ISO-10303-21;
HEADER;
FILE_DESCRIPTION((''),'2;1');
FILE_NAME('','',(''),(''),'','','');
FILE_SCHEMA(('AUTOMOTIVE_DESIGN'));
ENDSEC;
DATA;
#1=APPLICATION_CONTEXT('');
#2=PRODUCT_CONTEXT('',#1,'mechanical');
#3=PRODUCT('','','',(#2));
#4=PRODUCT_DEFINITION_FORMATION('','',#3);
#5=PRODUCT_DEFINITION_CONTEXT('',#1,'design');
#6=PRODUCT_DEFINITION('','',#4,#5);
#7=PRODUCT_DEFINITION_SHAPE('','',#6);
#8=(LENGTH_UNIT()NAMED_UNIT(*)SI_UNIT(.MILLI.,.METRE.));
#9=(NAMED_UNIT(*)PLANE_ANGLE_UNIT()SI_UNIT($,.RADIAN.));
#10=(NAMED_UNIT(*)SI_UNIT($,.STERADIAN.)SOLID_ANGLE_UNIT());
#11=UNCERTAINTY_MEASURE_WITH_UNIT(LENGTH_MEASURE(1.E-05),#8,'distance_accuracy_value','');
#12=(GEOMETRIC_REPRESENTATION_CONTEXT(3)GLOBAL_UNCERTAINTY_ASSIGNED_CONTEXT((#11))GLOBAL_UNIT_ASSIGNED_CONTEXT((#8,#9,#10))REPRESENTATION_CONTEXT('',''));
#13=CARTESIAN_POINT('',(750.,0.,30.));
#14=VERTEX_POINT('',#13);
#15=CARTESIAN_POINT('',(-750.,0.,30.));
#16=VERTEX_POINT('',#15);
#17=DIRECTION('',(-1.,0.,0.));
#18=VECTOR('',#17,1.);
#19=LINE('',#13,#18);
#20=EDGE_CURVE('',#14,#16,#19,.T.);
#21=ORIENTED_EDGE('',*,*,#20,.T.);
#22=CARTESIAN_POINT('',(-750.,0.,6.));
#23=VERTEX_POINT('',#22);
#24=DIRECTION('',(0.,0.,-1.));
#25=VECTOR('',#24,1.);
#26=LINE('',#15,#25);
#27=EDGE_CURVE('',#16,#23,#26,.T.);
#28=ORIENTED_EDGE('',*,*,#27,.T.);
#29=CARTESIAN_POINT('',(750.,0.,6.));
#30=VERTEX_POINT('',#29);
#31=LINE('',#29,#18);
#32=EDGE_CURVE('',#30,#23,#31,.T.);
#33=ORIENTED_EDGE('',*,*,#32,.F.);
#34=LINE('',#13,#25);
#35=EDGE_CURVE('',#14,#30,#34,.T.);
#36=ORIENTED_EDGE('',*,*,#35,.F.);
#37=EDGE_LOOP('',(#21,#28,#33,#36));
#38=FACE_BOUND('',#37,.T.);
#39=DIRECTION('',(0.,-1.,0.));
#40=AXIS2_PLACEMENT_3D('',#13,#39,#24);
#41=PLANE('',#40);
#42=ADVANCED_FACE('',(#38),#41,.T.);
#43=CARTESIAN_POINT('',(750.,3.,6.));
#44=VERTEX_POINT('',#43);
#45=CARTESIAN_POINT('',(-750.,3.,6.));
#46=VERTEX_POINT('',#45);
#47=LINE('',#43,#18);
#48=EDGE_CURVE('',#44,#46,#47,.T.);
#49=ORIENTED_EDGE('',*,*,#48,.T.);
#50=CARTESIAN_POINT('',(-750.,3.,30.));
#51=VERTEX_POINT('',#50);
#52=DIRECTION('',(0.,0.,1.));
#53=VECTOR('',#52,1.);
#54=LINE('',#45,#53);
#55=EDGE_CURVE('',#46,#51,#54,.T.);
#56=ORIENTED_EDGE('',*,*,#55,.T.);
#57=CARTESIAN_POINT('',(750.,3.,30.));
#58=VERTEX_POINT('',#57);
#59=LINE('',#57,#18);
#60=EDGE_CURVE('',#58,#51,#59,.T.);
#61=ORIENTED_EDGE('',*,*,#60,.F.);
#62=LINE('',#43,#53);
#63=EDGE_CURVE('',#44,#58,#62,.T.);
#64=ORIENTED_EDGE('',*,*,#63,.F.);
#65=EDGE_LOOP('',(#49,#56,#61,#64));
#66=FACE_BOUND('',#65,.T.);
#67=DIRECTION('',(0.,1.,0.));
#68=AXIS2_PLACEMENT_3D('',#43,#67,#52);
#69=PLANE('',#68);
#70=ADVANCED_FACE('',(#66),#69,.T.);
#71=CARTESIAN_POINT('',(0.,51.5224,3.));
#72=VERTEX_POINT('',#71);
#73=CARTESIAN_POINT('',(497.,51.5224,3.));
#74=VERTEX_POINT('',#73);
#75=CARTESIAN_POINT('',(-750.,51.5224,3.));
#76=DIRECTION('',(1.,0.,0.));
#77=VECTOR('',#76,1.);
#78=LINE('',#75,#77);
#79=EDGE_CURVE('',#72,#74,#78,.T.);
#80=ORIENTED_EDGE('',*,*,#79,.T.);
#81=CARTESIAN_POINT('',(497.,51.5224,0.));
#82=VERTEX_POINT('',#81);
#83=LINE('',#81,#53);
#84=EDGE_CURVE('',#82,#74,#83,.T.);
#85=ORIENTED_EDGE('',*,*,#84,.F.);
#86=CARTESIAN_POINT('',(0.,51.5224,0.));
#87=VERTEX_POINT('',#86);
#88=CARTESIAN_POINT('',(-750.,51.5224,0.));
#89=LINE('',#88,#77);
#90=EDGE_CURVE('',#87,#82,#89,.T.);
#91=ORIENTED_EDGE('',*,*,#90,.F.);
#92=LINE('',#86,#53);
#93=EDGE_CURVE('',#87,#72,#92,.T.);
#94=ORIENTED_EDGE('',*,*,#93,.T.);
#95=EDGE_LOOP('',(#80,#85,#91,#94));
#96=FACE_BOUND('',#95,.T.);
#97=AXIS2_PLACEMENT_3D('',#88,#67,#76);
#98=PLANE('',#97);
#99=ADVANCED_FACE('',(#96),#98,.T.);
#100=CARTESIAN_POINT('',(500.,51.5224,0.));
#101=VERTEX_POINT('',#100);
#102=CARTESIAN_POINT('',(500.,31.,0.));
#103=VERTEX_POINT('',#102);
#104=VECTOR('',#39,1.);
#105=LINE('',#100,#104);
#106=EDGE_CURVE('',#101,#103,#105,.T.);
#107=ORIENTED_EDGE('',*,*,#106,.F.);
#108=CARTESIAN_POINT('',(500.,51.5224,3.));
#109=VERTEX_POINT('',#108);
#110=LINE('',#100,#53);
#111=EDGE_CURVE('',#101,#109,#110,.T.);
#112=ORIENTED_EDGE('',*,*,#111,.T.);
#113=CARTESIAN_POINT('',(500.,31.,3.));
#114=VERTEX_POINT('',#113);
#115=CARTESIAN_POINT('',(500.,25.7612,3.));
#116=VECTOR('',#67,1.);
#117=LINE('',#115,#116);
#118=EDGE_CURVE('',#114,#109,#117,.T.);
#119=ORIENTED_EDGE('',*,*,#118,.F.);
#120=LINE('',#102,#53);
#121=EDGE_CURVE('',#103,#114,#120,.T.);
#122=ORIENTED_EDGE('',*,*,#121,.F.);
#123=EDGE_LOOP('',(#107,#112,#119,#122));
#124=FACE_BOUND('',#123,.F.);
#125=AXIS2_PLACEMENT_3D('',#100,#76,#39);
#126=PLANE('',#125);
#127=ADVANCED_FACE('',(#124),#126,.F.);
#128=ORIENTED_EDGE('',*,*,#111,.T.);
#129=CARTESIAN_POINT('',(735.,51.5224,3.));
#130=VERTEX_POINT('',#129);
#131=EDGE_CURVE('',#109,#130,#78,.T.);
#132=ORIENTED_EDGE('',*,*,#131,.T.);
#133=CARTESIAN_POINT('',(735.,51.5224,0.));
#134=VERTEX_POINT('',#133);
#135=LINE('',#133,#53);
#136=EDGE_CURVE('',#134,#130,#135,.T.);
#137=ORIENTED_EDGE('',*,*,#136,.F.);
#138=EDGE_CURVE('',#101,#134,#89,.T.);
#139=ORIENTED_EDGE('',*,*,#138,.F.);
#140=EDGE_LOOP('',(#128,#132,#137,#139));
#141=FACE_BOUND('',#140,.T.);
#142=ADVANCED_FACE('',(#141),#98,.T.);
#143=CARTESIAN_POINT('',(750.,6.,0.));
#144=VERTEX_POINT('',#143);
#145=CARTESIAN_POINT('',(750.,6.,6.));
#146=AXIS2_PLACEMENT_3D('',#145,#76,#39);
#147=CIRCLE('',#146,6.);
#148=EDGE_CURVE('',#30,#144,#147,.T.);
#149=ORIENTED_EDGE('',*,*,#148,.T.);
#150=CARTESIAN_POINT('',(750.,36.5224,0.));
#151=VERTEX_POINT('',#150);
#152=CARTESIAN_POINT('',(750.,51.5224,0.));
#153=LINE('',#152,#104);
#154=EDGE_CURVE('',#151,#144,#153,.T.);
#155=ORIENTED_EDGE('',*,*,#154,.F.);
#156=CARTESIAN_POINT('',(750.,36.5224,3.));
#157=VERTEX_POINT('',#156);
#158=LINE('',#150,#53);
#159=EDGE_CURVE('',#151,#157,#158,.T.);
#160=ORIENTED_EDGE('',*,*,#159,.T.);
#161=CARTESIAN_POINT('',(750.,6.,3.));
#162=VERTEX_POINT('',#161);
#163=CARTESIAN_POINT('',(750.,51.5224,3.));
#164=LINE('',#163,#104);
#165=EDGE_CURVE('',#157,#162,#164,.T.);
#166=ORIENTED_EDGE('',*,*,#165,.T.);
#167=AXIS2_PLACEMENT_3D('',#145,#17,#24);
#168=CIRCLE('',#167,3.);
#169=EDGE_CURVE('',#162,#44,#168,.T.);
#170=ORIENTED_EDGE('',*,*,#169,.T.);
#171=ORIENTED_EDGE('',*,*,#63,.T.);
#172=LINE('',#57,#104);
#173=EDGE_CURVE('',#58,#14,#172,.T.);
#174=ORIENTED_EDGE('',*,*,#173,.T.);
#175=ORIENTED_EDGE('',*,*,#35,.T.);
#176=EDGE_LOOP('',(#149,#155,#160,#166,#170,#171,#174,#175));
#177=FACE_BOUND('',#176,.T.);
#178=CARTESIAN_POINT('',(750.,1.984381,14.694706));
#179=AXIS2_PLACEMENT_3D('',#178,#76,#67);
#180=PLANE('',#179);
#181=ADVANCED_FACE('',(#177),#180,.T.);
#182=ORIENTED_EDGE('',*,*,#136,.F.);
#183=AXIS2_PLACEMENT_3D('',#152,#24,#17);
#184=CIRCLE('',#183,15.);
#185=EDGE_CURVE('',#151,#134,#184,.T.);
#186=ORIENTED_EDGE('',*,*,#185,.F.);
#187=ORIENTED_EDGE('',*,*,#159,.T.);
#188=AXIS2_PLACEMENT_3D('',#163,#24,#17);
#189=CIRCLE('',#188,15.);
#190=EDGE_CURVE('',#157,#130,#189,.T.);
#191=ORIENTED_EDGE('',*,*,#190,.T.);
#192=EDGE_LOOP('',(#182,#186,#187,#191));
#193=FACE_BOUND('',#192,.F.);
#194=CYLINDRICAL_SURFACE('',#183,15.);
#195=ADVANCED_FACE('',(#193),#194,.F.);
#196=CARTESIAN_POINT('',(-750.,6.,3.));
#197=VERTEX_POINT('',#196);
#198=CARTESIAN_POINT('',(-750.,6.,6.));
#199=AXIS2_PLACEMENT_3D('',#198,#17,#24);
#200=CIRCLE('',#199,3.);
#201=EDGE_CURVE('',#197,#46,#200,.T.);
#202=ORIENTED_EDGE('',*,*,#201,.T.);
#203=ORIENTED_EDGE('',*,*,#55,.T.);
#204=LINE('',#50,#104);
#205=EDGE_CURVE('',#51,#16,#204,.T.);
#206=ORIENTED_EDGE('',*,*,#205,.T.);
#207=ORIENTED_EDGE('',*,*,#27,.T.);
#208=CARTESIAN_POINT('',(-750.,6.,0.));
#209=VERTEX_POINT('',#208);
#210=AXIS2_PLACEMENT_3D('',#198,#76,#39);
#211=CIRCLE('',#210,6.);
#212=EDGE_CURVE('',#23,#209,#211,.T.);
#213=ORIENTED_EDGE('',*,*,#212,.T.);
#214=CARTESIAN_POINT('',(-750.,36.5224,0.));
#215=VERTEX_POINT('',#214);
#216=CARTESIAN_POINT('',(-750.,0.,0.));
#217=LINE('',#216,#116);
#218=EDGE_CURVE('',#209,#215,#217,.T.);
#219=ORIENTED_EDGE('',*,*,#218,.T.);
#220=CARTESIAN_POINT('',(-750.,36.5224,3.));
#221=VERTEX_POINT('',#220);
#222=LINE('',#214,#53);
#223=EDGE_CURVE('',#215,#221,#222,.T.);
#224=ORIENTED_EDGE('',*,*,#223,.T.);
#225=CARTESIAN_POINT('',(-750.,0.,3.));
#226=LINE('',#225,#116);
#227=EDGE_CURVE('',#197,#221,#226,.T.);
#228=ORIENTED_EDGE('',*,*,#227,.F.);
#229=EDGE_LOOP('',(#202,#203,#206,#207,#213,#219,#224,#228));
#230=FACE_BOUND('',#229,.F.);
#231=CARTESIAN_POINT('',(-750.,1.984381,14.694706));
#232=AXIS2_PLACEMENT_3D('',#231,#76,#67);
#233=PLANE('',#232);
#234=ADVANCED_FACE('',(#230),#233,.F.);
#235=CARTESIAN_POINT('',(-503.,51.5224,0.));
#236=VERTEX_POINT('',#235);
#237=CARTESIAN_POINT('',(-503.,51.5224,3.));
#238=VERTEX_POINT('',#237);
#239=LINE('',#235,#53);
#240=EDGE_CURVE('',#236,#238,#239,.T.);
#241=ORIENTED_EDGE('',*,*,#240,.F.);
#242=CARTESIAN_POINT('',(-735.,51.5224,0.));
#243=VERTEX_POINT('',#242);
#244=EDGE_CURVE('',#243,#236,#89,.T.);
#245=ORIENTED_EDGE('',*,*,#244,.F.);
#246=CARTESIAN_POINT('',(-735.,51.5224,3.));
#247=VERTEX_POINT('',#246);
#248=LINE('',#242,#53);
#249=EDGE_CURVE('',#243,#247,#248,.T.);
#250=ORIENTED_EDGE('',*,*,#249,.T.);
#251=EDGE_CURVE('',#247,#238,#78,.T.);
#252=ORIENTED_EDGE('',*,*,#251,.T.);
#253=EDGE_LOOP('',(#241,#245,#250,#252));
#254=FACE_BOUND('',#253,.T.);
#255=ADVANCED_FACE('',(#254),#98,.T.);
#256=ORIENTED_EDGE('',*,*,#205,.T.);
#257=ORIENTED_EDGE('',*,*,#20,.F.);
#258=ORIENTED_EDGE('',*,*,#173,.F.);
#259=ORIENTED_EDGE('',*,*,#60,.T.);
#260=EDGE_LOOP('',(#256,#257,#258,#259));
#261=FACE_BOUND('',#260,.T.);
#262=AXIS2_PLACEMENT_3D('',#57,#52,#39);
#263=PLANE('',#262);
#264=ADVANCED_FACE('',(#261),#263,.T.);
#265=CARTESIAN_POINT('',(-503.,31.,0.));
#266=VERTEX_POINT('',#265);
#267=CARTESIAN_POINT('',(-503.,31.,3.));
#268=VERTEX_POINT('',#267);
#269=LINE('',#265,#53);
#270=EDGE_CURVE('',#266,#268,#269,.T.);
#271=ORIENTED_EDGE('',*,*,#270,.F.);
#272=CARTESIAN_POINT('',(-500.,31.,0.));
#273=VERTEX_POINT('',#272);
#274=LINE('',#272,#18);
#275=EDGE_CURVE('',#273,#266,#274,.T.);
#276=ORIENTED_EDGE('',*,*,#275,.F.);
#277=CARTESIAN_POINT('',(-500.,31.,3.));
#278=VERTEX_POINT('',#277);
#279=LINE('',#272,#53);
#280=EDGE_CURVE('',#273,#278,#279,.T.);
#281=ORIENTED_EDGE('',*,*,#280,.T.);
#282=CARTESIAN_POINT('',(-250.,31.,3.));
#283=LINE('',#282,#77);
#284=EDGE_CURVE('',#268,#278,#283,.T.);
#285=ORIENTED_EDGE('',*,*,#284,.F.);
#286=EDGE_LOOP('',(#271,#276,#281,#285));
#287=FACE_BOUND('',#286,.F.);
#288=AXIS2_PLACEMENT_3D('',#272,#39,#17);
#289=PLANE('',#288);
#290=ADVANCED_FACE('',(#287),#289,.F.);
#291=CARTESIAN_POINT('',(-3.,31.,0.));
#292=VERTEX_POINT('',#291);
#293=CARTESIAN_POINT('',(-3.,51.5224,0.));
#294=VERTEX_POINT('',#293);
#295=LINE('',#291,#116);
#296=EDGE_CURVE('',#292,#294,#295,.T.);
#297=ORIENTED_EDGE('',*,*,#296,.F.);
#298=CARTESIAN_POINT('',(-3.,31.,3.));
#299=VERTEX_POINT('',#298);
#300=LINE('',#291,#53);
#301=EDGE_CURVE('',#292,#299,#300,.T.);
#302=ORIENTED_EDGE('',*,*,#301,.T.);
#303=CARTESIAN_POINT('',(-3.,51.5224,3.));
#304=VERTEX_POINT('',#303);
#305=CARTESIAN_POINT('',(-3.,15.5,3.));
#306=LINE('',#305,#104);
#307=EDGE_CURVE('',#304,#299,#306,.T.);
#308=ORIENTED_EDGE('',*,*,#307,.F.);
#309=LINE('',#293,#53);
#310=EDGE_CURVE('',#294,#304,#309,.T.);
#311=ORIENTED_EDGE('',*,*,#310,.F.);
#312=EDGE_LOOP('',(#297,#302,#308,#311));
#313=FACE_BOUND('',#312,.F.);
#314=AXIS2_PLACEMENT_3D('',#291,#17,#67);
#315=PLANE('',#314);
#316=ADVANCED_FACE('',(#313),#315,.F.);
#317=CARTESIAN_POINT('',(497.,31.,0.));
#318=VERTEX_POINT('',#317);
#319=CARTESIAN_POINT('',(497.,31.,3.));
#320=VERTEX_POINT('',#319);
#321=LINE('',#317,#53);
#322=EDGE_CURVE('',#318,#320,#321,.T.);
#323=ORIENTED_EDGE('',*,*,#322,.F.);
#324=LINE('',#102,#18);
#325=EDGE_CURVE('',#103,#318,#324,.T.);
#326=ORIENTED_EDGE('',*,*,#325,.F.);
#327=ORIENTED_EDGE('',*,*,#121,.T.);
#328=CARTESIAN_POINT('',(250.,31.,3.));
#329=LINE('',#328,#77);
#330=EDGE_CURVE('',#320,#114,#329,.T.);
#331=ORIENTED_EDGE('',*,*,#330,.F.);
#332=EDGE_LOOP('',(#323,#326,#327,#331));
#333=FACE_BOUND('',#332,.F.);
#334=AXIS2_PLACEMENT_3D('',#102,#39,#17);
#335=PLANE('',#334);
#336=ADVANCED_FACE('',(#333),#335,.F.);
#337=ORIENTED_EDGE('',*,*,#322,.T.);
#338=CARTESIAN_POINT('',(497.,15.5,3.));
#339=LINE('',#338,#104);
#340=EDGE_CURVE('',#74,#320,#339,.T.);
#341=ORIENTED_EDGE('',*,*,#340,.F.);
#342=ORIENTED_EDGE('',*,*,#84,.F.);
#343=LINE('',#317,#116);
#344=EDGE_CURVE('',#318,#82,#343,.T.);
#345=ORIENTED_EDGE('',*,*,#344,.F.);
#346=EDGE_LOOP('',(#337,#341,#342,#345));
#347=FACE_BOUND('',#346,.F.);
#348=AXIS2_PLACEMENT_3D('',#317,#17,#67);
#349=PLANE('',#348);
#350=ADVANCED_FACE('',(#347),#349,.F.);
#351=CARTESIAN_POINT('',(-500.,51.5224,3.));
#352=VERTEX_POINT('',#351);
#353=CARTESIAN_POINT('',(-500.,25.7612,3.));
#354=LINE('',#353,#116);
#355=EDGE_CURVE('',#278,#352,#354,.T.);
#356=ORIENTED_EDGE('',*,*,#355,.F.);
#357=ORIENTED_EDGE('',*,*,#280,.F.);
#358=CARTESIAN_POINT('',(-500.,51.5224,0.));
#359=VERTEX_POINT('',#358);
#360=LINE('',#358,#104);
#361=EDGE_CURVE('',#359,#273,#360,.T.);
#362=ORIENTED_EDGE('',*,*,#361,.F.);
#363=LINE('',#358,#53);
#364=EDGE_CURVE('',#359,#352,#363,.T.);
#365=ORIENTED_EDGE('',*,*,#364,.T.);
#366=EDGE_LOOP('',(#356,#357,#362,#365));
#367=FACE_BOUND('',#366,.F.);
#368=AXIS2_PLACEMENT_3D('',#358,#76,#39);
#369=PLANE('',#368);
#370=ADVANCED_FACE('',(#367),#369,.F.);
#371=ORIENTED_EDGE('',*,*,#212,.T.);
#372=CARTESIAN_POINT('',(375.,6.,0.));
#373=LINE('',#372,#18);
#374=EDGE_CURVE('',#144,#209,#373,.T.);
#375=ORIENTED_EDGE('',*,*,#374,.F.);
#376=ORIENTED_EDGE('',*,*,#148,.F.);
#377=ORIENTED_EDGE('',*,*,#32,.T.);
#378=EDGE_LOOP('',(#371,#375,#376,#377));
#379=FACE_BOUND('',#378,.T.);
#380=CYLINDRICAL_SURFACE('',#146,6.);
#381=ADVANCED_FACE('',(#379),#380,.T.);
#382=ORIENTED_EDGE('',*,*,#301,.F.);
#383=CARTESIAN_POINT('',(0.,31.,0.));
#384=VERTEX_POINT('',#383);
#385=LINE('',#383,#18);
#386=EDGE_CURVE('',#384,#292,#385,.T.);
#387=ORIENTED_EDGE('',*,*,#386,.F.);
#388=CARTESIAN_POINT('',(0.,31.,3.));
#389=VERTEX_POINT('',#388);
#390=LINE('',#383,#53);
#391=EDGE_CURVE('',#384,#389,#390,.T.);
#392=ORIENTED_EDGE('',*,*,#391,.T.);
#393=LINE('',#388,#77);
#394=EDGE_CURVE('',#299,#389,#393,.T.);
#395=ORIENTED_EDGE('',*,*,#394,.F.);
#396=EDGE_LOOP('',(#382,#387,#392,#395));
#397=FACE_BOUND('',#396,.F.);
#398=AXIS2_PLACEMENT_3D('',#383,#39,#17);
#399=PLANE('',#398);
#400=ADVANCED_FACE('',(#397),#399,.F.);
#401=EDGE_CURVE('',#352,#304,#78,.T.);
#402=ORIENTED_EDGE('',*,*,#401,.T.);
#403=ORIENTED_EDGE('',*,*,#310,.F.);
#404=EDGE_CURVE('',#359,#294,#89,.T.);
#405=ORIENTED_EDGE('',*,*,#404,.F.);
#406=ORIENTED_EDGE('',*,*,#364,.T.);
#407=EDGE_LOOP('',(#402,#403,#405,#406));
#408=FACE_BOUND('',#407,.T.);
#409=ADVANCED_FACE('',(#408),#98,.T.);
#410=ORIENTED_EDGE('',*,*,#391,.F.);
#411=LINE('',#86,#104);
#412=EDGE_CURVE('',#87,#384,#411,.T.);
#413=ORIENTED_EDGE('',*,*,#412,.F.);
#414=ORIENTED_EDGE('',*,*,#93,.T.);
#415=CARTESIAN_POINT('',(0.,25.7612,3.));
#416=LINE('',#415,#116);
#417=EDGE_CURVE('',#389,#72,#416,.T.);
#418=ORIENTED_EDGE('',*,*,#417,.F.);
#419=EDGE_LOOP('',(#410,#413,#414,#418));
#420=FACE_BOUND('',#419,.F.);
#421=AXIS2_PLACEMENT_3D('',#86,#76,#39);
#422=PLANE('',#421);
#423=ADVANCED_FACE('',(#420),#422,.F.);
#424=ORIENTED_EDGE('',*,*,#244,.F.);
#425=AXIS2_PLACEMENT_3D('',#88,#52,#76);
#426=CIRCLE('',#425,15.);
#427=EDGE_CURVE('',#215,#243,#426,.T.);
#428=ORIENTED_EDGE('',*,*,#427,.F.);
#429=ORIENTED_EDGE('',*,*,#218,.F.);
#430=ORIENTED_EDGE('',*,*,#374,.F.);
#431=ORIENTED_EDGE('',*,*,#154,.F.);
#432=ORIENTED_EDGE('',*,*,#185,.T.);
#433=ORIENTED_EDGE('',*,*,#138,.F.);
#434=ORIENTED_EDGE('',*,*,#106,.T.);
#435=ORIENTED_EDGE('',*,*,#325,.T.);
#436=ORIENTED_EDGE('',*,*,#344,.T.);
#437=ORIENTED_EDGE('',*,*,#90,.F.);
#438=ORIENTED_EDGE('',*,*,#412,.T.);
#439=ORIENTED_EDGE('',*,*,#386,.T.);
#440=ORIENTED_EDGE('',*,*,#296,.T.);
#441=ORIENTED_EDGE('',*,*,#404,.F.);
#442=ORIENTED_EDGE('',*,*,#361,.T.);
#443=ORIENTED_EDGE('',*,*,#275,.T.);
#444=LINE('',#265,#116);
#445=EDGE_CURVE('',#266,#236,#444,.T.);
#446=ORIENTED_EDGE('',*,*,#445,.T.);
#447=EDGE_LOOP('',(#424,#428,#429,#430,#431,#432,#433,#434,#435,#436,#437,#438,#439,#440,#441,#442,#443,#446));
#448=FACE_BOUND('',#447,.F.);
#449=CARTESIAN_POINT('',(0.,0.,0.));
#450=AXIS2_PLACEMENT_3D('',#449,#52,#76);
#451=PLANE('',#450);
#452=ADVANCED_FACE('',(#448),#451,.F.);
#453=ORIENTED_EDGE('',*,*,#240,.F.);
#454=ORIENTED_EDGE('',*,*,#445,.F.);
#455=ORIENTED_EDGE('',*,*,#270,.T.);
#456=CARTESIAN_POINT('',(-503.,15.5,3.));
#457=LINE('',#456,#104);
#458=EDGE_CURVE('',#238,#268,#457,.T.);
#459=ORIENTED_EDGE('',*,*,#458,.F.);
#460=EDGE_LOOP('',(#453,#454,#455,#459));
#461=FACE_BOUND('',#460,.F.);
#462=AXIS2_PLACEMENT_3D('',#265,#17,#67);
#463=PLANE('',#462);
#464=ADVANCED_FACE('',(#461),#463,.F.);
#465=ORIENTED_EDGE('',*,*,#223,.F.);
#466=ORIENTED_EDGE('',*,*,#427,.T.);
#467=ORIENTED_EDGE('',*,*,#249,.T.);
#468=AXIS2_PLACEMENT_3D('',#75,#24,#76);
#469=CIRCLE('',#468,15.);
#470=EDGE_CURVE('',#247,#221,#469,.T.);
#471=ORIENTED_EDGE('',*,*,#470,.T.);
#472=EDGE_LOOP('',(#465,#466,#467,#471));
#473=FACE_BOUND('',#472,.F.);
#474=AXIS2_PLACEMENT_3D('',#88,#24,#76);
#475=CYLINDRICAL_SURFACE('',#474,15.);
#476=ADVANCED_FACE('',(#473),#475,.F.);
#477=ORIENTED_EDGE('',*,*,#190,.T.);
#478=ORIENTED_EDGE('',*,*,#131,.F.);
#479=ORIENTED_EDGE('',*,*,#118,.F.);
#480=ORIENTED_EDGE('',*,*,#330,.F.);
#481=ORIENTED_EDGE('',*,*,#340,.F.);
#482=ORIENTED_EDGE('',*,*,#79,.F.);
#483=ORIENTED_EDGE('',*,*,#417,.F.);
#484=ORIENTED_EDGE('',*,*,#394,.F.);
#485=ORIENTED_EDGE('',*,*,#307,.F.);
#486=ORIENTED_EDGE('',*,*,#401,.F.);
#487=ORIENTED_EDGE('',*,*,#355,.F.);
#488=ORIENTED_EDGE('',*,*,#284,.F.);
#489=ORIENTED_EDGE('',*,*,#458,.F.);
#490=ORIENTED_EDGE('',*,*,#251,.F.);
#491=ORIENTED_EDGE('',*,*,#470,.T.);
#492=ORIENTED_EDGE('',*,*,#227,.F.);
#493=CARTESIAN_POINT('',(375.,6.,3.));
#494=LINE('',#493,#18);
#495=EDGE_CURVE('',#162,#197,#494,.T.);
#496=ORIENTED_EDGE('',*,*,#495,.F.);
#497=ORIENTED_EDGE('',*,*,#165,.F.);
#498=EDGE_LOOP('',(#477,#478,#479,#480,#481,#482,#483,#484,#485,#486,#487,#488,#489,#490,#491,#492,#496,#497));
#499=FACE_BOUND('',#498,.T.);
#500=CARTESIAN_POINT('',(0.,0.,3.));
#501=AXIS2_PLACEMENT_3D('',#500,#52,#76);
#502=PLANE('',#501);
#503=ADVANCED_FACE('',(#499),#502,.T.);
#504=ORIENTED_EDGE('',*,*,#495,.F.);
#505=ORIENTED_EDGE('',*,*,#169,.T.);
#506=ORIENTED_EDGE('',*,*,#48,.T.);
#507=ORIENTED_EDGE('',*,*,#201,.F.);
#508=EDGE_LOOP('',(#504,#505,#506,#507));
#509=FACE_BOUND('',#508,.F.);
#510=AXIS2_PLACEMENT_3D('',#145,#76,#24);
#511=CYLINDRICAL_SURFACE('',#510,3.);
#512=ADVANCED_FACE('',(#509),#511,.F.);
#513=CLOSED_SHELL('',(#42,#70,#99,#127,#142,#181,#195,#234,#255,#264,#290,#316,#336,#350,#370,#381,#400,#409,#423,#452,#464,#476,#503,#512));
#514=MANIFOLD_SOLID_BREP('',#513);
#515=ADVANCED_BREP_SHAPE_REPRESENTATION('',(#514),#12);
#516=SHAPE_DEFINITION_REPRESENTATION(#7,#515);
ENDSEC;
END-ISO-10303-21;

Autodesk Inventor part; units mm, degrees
ref_plane "YZ Plane" through (0, 0, 0) normal (1, 0, 0) x (0, 1, 0)
ref_plane "XZ Plane" through (0, 0, 0) normal (0, 1, 0) x (-1, 0, 0)
ref_plane "XY Plane" through (0, 0, 0) normal (0, 0, 1) x (1, 0, 0)
sketch "Sketch1" plane through (0, 0, 0) normal (0, 0, 1) x (1, 0, 0)
  line L0 (-750, 51.5224) -> (750, 51.5224)
  line L1 (750, 51.5224) -> (750, 0)
  line L2 (750, 0) -> (-750, 0)
  line L3 (-750, 0) -> (-750, 51.5224)
  point P0 (0, 0)
  point P1 (0, 0)
  dimension "d0" = 1500
  dimension "d1" = 51.5224
extrude "Plate1" add sketch "Sketch1" along normal blind 3
sketch "Sketch2" plane through (750, 3, 0) normal (0, -1, 0) x (1, 0, 0)
  line L0 (-1500, 0) -> (0, 0)
  line L1 (0, 0) -> (0, 30)
  line L2 (0, 30) -> (-1500, 30)
  line L3 (-1500, 30) -> (-1500, 0)
edge flange "Flange1" height 30 angle 90 thickness 3 bend radius 3 thickness toward (0, -1, 0) relief tear relief width 3 relief depth 1.5 edges at (0, 0, 3) wall of the first edge with corners at (-750, 3, 0) (750, 3, 0) (750, 3, 30) (-750, 3, 30)
bend "Bend1"
corner "Corner1"
sketch "Sketch5" plane through (0, 0, 0) normal (0, 0, -1) x (-1, 0, 0)
  line L0 (750, 51.5224) -> (-750, 51.5224) projected
  line L1 (500, 51.5224) -> (500, 31)
  line L2 (500, 31) -> (503, 31)
  line L3 (503, 31) -> (503, 51.5224)
  line L4 (750, 0) -> (-750, 0) projected
  point P0 (0, 0)
  dimension "d18" = 3
  dimension "d19" = 247
  dimension "d20" = 31
extrude "Extrusion1" cut sketch "Sketch5" against normal through all
pattern_linear "Rectangular Pattern1" count 3 spacing 500 along (1, 0, 0) of "Extrusion1"
sketch "Sketch6" plane through (0, 0, 0) normal (0, 0, -1) x (-1, 0, 0)
  line L0 (-750, 51.5224) -> (-750, 6) projected
  circle A0 centre (-750, 51.5224) radius 15
  line L1 (-750, 51.5224) -> (-500, 51.5224) projected
  point P0 (0, 0)
  point P1 (-735, 51.5224)
  point P2 (-750, 36.5224)
  dimension "d24" = 30
extrude "Extrusion2" cut sketch "Sketch6" against normal through all contours L1 A0 L0 picked at (-740.1254, 50.4098)
mirror "Mirror1" about plane through (0, 0, 0) normal (1, 0, 0) of "Extrusion2"
equation "\"d1\" = Стрингер_5"
equation "\"d18\" = Thickness"
equation "\"d2\" = Thickness"
equation "\"d3\" = BendReliefWidth"
equation "\"d4\" = BendReliefDepth"
equation "\"d5\" = MinimumRemnant"
equation "\"d6\" = TransitionRadius"
equation "\"d9\" = BendRadius"
equation "\"d10\" = CornerReliefSize"
equation "\"d11\" = GapSize"
equation "\"d12\" = JacobiRadiusSize"
equation "\"BendRadius\" = Thickness"
equation "\"BendReliefWidth\" = Thickness"
equation "\"BendReliefDepth\" = 0.5 * Thickness"
equation "\"CornerReliefSize\" = 4 * Thickness"
equation "\"MinimumRemnant\" = 2 * Thickness"
equation "\"TransitionRadius\" = BendRadius"
equation "\"JacobiRadiusSize\" = BendRadius"
equation "\"GapSize\" = Thickness"
equation "\"Стрингер_5\" = 51.522376"
equation "\"Thickness\" = 3"
properties part number "МОО 055 стрингер борт 51"
